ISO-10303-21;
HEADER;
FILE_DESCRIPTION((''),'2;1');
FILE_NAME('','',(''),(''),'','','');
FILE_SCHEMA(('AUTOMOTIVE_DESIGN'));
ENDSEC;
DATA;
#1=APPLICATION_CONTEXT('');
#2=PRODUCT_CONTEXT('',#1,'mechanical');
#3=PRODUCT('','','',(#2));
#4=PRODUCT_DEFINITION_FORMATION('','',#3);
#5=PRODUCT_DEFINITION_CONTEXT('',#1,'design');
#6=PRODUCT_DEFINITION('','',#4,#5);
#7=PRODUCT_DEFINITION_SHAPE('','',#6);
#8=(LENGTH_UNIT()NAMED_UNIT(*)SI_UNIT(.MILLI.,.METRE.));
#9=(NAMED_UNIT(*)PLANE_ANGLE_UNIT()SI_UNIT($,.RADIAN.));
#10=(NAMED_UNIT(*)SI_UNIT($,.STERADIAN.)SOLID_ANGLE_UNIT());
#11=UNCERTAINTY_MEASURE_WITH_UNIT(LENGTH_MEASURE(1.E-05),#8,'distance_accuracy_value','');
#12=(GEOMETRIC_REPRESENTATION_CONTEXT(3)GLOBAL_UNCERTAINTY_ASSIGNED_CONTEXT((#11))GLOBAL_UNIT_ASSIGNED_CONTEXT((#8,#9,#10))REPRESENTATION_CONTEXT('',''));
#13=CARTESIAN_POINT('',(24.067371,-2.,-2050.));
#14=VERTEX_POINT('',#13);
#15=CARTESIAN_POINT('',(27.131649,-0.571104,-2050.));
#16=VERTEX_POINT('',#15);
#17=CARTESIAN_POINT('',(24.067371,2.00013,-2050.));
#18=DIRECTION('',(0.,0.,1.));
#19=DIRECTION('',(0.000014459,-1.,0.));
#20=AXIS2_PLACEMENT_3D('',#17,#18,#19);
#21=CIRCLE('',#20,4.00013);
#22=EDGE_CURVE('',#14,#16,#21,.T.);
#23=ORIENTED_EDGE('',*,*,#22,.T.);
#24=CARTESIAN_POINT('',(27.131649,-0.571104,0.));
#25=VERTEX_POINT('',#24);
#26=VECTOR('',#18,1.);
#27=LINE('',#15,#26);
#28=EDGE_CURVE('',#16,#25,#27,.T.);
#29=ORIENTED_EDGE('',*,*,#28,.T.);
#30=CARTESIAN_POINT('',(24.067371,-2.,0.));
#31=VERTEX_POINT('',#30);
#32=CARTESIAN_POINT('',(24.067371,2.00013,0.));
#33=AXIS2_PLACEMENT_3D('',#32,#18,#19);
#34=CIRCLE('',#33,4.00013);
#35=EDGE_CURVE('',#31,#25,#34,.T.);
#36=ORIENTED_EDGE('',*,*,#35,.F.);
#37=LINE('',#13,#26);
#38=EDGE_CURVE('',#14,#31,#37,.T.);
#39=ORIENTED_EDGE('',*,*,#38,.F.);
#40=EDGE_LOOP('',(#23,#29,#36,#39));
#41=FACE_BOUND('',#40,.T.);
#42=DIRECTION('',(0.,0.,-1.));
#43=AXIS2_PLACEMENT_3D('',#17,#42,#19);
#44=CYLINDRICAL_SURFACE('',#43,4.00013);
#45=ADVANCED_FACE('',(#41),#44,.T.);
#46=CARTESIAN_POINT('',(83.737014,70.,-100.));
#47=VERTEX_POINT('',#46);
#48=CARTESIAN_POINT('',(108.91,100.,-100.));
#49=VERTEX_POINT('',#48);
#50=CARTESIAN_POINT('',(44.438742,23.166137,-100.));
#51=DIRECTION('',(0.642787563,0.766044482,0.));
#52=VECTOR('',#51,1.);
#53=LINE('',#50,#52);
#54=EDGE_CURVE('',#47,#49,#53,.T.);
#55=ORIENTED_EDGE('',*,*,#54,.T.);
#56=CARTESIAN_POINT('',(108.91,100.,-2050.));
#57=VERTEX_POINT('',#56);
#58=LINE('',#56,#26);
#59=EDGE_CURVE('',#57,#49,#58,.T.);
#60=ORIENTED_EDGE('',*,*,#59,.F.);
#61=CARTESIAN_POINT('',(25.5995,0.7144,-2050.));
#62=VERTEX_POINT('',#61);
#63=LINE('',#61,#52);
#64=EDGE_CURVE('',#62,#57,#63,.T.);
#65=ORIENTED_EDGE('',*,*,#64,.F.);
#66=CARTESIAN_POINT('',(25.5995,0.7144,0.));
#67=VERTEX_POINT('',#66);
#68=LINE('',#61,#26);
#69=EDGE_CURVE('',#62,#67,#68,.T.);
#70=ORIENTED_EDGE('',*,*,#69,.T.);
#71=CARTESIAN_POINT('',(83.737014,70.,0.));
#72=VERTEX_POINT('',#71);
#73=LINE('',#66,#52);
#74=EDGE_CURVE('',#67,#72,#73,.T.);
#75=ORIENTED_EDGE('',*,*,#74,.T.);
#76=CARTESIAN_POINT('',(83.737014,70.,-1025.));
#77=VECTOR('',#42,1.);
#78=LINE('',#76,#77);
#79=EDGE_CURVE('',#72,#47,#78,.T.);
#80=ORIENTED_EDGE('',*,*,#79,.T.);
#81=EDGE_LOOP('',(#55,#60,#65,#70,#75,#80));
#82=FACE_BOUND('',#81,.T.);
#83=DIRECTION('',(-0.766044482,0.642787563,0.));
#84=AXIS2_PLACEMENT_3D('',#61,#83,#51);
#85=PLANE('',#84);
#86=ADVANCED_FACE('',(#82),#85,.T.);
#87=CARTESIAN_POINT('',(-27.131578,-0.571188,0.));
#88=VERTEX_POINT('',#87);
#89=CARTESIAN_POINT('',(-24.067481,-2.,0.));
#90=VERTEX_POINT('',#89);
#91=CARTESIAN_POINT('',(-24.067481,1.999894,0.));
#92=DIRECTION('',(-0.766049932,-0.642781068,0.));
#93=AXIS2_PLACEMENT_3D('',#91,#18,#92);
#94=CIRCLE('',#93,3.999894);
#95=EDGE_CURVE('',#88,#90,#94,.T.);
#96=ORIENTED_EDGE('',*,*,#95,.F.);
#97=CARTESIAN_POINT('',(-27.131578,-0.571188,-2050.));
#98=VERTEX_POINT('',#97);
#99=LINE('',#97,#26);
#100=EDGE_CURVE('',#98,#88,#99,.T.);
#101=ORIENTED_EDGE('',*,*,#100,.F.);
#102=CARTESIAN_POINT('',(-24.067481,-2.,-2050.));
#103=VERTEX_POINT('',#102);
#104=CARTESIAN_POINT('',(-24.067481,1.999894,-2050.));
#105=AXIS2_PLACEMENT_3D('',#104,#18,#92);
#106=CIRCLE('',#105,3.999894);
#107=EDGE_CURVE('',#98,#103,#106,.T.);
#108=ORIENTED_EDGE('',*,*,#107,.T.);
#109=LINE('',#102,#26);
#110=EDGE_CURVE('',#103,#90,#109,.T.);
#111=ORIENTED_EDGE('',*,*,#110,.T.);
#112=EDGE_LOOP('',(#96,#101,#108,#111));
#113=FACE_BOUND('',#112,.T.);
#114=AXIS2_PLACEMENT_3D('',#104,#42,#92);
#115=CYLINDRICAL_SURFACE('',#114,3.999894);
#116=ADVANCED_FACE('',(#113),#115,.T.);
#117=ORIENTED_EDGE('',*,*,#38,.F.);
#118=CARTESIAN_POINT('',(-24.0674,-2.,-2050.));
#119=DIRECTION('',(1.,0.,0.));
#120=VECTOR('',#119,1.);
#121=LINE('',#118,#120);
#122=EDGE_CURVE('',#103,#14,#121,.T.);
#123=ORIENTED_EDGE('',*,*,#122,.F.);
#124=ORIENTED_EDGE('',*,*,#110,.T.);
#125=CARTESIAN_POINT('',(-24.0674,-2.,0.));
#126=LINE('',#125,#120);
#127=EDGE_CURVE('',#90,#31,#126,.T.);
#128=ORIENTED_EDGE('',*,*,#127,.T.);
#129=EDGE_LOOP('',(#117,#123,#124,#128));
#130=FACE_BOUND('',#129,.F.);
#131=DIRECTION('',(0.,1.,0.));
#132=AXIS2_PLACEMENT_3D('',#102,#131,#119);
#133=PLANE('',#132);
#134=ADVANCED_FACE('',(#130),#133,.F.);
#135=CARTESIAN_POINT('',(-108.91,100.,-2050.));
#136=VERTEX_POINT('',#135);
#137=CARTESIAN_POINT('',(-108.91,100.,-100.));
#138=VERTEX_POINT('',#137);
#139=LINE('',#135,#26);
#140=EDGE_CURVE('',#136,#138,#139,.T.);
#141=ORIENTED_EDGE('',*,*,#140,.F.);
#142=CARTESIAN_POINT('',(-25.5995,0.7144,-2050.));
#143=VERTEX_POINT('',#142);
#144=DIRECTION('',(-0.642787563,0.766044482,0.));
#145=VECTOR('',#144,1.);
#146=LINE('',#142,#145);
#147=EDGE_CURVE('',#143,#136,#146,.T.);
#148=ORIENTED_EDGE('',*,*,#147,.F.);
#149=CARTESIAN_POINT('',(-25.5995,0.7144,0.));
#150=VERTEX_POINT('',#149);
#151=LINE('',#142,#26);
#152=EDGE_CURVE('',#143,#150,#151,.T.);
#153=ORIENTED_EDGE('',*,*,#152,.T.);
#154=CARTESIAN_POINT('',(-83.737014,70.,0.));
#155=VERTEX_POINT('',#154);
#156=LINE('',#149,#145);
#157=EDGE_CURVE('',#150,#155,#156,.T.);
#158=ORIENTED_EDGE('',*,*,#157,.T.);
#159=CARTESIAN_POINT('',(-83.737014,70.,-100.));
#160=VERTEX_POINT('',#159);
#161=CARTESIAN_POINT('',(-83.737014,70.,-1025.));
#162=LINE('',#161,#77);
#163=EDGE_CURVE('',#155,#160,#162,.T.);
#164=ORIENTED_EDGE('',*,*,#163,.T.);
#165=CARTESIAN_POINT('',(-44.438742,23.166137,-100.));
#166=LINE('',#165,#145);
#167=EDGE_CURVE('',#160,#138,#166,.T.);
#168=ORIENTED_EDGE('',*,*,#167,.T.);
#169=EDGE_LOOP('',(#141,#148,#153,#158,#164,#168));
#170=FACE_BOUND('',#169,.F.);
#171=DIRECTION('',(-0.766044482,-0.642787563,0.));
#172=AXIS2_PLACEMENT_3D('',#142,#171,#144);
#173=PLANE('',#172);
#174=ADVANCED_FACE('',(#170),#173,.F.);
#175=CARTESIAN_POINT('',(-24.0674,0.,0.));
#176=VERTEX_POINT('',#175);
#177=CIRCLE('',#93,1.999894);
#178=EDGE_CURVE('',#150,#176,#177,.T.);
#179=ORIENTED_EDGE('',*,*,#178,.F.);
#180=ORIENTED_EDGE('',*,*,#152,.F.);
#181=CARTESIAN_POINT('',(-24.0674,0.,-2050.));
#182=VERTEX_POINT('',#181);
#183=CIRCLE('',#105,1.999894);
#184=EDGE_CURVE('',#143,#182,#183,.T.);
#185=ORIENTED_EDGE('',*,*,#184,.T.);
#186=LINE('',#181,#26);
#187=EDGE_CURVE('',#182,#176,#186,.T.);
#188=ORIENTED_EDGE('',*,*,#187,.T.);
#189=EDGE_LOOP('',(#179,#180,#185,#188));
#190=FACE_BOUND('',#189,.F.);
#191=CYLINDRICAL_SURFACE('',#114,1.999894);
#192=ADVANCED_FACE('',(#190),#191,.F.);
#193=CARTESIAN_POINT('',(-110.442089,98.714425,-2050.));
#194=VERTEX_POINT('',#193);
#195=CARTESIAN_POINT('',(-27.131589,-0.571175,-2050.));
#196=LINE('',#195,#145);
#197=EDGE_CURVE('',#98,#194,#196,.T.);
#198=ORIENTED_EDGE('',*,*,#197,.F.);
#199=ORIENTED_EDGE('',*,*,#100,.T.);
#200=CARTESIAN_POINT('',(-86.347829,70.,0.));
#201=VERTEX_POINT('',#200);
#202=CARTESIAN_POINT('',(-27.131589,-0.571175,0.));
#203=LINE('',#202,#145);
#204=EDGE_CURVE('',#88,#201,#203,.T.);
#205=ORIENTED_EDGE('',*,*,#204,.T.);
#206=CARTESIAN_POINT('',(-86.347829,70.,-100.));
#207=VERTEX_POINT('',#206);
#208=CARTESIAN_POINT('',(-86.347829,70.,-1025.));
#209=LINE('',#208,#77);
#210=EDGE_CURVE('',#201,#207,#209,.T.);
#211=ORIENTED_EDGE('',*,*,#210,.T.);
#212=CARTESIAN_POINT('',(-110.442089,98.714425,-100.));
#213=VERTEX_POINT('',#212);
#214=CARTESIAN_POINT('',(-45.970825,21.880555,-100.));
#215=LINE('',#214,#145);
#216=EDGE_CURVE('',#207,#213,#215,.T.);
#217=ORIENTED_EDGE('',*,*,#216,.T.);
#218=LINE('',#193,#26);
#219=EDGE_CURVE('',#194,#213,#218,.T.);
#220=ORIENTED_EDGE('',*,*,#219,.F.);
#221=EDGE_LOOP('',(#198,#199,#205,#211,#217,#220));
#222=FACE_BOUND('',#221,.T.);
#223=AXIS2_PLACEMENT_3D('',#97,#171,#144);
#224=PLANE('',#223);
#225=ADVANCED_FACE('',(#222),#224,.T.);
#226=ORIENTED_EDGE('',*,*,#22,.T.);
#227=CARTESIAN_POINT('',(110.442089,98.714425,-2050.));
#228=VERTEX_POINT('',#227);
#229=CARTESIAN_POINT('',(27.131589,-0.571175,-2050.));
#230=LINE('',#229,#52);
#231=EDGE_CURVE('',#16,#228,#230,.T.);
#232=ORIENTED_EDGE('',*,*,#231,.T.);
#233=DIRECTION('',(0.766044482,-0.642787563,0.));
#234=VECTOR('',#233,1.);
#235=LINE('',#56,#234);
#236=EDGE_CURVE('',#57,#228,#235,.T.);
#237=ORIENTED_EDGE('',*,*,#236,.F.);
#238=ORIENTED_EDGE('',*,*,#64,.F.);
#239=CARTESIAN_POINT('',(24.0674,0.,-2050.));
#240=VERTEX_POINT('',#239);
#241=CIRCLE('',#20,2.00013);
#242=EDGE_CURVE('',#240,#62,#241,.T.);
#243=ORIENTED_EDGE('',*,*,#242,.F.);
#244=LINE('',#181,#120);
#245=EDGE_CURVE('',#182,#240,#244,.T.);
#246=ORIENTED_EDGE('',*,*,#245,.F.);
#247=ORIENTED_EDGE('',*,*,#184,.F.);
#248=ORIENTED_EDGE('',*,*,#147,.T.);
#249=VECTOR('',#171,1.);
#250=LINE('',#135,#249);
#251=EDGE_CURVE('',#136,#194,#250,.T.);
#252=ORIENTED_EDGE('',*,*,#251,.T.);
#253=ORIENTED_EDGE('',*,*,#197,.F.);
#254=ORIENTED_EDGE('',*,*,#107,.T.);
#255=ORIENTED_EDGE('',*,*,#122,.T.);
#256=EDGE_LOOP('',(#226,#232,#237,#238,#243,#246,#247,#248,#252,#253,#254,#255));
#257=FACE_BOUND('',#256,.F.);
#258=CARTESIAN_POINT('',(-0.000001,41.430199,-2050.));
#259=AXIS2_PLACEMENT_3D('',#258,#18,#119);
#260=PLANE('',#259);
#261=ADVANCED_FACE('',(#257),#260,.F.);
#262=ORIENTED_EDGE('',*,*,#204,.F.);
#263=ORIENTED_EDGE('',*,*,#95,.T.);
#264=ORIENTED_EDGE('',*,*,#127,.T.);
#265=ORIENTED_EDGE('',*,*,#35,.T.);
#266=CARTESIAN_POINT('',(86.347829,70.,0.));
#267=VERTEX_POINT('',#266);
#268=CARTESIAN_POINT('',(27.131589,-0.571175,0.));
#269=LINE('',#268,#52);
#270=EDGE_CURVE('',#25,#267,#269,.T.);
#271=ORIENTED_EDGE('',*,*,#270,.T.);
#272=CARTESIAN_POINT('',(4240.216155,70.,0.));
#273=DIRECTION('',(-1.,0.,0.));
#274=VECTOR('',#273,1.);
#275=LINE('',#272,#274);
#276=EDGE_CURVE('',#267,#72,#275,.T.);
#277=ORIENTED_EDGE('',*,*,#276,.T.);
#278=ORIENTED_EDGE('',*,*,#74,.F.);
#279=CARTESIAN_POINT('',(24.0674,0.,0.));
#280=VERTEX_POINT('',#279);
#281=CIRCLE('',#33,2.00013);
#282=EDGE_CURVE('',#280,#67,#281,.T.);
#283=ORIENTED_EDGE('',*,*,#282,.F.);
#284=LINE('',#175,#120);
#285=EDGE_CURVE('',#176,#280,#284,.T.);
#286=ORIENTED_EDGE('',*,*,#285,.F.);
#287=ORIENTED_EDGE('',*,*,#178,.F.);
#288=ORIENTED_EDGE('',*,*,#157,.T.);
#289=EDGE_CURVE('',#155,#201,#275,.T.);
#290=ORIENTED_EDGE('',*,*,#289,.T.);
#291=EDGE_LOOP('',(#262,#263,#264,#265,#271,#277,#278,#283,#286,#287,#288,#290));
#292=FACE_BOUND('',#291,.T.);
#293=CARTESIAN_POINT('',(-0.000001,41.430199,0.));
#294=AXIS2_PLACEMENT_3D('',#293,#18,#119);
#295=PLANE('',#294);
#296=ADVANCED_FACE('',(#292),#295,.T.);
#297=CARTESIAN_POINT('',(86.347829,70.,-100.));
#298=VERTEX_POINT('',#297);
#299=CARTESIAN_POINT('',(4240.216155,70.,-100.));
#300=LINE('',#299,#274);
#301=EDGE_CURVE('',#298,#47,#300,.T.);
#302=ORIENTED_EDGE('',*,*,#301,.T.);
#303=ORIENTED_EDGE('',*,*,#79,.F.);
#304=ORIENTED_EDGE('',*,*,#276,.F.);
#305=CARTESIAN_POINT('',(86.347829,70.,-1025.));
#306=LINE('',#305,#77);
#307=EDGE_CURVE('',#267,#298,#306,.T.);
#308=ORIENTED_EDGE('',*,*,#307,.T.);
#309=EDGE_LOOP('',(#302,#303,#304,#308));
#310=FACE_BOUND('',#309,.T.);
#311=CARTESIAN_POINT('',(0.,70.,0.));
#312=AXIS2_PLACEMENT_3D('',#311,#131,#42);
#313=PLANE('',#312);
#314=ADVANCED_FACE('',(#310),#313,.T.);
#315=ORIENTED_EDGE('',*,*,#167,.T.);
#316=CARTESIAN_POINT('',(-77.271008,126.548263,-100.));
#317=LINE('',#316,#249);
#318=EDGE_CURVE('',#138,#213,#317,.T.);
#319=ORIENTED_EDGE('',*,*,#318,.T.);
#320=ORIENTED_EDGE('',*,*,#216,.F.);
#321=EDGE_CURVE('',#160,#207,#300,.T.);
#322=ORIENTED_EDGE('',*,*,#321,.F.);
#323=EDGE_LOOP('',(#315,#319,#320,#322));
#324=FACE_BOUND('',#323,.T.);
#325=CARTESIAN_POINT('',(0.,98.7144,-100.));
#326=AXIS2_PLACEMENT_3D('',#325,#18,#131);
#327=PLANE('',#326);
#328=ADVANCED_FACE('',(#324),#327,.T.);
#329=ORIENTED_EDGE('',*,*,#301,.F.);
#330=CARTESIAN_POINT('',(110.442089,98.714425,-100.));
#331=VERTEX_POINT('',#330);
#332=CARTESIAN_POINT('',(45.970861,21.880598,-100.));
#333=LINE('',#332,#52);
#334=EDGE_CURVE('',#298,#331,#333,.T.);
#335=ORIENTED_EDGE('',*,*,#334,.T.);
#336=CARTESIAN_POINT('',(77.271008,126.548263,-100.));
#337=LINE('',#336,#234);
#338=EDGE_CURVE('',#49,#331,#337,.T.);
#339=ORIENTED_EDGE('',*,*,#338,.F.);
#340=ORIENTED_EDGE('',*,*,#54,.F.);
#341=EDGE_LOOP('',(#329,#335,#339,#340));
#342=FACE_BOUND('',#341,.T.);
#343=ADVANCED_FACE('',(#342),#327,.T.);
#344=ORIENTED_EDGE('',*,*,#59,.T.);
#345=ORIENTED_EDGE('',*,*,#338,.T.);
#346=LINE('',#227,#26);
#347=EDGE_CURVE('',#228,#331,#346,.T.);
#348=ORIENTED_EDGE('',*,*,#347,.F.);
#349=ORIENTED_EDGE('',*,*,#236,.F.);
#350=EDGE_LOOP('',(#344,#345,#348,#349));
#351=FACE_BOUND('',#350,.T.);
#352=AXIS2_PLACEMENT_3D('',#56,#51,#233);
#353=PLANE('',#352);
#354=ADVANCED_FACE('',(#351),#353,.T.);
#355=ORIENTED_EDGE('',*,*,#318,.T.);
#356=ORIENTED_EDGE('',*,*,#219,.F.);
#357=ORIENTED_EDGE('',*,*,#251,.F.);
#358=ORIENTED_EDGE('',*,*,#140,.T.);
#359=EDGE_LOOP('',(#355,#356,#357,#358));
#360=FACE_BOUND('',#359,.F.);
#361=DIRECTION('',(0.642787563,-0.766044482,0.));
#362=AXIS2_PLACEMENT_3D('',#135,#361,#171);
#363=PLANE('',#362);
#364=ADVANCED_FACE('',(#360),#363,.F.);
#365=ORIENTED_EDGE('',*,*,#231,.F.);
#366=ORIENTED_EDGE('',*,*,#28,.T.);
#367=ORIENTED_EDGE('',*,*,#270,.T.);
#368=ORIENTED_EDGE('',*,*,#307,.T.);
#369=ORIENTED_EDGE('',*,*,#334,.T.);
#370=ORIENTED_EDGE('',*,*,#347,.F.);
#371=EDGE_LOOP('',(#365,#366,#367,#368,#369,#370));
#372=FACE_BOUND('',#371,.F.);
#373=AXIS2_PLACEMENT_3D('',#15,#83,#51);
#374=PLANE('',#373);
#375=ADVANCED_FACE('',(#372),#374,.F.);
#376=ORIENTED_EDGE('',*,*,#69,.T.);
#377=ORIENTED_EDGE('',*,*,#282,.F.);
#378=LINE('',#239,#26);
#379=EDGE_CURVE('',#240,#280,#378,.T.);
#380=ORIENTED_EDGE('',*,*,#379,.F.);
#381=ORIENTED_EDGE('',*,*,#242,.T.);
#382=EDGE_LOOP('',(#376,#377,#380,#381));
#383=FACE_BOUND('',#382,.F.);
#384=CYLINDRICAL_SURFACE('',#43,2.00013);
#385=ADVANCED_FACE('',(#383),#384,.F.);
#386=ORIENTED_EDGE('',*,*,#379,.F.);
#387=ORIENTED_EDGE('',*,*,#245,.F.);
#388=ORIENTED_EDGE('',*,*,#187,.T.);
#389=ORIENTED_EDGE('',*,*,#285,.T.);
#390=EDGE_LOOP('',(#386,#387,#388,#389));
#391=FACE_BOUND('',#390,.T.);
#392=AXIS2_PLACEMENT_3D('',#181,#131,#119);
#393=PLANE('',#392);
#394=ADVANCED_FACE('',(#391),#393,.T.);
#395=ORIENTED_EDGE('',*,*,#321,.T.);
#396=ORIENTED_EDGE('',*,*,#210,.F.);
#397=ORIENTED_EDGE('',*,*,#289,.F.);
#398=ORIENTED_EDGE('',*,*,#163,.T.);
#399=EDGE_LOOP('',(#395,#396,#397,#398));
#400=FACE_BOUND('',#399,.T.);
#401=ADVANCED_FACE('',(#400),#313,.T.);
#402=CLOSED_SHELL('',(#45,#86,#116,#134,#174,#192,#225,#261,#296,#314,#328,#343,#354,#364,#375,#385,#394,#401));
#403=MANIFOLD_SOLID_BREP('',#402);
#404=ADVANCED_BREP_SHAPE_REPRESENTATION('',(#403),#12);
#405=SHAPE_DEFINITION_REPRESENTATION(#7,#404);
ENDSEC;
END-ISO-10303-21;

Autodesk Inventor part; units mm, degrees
ref_plane "YZ Plane" through (0, 0, 0) normal (1, 0, 0) x (0, 1, 0)
ref_plane "XZ Plane" through (0, 0, 0) normal (0, 1, 0) x (-1, 0, 0)
ref_plane "XY Plane" through (0, 0, 0) normal (0, 0, 1) x (1, 0, 0)
sketch "Sketch4" plane through (0, 0, 0) normal (0, 0, 1) x (1, 0, 0)
  line L0 (-25, 0) -> (-24.0674, 0) construction
  line L1 (25, 0) -> (25.5995, 0.7144) construction
  line L2 (-25, 0) -> (-25.5995, 0.7144) construction
  line L3 (-108.91, 100) -> (108.91, 100) construction
  arc A0 (-25.5995, 0.7144) -> (-24.0674, 0) centre (-24.0674, 2) ccw
  arc A1 (24.0674, 0) -> (25.5995, 0.7144) centre (24.0674, 2) ccw
  line L4 (24.0674, 0) -> (25, 0) construction
  line L5 (25.5995, 0.7144) -> (108.91, 100)
  line L6 (-25.5995, 0.7144) -> (-108.91, 100)
  line L7 (-24.0674, 0) -> (24.0674, 0)
  point P0 (0, 0)
  point P1 (0, 0)
  point P2 (0, 100)
  point P3 (0, 0)
  dimension "d14" = 217.8199
  dimension "d15" = 50
  dimension "d16" = 100
  dimension "d17" = 2
  dimension "d39" = 130
contour flange "Contour Flange2" sketch "Sketch4" thickness 2 bend radius 2 width 2050 along (0, 0, -1) mid plane no both sides no wall seen from (-67.2547, 50.3572, 0) lies toward (-0.7660444, -0.6427876, 0) curves L6 A0 L7 A1 L5
bend "Bend4"
corner "Corner4"
sketch "Sketch6" plane through (0, 0, 0) normal (1, 0, 0) x (0, 1, 0)
  line L0 (100, -2050) -> (100, 0) projected
  line L1 (-0.5712, 0) -> (98.7144, 0) projected
  line L2 (98.7144, 0) -> (98.7144, -2050) projected
  line L3 (98.7144, 0) -> (100, 0)
  line L4 (70, 0) -> (70, -100)
  line L5 (70, -100) -> (100, -100)
  point P0 (0, 0)
  dimension "d51" = 30
  dimension "d52" = 100
extrude "Extrusion1" cut sketch "Sketch6" along normal through all both and the other way through all
equation "\"d15\" = Лоток_ширина_низ"
equation "\"d16\" = Лоток_высота"
equation "\"d17\" = BendRadius"
equation "\"d39\" = Лоток_угол"
equation "\"d51\" = Лоток_глубина_выреза"
equation "\"d40\" = Thickness"
equation "\"d41\" = BendReliefWidth"
equation "\"d42\" = BendReliefDepth"
equation "\"d43\" = MinimumRemnant"
equation "\"d44\" = TransitionRadius"
equation "\"d46\" = BendRadius"
equation "\"d48\" = CornerReliefSize"
equation "\"d49\" = GapSize"
equation "\"d50\" = JacobiRadiusSize"
equation "\"BendRadius\" = Thickness"
equation "\"BendReliefWidth\" = Thickness"
equation "\"BendReliefDepth\" = 0.5 * Thickness"
equation "\"CornerReliefSize\" = 4 * Thickness"
equation "\"MinimumRemnant\" = 2 * Thickness"
equation "\"TransitionRadius\" = BendRadius"
equation "\"JacobiRadiusSize\" = BendRadius"
equation "\"GapSize\" = Thickness"
equation "\"Лоток_ширина_низ\" = 50"
equation "\"Лоток_высота\" = 100"
equation "\"Лоток_угол\" = 130deg"
equation "\"Лоток_глубина_выреза\" = 30"
equation "\"Thickness\" = 2"
properties part number "ДМФ 051 лоток илоотвод"
